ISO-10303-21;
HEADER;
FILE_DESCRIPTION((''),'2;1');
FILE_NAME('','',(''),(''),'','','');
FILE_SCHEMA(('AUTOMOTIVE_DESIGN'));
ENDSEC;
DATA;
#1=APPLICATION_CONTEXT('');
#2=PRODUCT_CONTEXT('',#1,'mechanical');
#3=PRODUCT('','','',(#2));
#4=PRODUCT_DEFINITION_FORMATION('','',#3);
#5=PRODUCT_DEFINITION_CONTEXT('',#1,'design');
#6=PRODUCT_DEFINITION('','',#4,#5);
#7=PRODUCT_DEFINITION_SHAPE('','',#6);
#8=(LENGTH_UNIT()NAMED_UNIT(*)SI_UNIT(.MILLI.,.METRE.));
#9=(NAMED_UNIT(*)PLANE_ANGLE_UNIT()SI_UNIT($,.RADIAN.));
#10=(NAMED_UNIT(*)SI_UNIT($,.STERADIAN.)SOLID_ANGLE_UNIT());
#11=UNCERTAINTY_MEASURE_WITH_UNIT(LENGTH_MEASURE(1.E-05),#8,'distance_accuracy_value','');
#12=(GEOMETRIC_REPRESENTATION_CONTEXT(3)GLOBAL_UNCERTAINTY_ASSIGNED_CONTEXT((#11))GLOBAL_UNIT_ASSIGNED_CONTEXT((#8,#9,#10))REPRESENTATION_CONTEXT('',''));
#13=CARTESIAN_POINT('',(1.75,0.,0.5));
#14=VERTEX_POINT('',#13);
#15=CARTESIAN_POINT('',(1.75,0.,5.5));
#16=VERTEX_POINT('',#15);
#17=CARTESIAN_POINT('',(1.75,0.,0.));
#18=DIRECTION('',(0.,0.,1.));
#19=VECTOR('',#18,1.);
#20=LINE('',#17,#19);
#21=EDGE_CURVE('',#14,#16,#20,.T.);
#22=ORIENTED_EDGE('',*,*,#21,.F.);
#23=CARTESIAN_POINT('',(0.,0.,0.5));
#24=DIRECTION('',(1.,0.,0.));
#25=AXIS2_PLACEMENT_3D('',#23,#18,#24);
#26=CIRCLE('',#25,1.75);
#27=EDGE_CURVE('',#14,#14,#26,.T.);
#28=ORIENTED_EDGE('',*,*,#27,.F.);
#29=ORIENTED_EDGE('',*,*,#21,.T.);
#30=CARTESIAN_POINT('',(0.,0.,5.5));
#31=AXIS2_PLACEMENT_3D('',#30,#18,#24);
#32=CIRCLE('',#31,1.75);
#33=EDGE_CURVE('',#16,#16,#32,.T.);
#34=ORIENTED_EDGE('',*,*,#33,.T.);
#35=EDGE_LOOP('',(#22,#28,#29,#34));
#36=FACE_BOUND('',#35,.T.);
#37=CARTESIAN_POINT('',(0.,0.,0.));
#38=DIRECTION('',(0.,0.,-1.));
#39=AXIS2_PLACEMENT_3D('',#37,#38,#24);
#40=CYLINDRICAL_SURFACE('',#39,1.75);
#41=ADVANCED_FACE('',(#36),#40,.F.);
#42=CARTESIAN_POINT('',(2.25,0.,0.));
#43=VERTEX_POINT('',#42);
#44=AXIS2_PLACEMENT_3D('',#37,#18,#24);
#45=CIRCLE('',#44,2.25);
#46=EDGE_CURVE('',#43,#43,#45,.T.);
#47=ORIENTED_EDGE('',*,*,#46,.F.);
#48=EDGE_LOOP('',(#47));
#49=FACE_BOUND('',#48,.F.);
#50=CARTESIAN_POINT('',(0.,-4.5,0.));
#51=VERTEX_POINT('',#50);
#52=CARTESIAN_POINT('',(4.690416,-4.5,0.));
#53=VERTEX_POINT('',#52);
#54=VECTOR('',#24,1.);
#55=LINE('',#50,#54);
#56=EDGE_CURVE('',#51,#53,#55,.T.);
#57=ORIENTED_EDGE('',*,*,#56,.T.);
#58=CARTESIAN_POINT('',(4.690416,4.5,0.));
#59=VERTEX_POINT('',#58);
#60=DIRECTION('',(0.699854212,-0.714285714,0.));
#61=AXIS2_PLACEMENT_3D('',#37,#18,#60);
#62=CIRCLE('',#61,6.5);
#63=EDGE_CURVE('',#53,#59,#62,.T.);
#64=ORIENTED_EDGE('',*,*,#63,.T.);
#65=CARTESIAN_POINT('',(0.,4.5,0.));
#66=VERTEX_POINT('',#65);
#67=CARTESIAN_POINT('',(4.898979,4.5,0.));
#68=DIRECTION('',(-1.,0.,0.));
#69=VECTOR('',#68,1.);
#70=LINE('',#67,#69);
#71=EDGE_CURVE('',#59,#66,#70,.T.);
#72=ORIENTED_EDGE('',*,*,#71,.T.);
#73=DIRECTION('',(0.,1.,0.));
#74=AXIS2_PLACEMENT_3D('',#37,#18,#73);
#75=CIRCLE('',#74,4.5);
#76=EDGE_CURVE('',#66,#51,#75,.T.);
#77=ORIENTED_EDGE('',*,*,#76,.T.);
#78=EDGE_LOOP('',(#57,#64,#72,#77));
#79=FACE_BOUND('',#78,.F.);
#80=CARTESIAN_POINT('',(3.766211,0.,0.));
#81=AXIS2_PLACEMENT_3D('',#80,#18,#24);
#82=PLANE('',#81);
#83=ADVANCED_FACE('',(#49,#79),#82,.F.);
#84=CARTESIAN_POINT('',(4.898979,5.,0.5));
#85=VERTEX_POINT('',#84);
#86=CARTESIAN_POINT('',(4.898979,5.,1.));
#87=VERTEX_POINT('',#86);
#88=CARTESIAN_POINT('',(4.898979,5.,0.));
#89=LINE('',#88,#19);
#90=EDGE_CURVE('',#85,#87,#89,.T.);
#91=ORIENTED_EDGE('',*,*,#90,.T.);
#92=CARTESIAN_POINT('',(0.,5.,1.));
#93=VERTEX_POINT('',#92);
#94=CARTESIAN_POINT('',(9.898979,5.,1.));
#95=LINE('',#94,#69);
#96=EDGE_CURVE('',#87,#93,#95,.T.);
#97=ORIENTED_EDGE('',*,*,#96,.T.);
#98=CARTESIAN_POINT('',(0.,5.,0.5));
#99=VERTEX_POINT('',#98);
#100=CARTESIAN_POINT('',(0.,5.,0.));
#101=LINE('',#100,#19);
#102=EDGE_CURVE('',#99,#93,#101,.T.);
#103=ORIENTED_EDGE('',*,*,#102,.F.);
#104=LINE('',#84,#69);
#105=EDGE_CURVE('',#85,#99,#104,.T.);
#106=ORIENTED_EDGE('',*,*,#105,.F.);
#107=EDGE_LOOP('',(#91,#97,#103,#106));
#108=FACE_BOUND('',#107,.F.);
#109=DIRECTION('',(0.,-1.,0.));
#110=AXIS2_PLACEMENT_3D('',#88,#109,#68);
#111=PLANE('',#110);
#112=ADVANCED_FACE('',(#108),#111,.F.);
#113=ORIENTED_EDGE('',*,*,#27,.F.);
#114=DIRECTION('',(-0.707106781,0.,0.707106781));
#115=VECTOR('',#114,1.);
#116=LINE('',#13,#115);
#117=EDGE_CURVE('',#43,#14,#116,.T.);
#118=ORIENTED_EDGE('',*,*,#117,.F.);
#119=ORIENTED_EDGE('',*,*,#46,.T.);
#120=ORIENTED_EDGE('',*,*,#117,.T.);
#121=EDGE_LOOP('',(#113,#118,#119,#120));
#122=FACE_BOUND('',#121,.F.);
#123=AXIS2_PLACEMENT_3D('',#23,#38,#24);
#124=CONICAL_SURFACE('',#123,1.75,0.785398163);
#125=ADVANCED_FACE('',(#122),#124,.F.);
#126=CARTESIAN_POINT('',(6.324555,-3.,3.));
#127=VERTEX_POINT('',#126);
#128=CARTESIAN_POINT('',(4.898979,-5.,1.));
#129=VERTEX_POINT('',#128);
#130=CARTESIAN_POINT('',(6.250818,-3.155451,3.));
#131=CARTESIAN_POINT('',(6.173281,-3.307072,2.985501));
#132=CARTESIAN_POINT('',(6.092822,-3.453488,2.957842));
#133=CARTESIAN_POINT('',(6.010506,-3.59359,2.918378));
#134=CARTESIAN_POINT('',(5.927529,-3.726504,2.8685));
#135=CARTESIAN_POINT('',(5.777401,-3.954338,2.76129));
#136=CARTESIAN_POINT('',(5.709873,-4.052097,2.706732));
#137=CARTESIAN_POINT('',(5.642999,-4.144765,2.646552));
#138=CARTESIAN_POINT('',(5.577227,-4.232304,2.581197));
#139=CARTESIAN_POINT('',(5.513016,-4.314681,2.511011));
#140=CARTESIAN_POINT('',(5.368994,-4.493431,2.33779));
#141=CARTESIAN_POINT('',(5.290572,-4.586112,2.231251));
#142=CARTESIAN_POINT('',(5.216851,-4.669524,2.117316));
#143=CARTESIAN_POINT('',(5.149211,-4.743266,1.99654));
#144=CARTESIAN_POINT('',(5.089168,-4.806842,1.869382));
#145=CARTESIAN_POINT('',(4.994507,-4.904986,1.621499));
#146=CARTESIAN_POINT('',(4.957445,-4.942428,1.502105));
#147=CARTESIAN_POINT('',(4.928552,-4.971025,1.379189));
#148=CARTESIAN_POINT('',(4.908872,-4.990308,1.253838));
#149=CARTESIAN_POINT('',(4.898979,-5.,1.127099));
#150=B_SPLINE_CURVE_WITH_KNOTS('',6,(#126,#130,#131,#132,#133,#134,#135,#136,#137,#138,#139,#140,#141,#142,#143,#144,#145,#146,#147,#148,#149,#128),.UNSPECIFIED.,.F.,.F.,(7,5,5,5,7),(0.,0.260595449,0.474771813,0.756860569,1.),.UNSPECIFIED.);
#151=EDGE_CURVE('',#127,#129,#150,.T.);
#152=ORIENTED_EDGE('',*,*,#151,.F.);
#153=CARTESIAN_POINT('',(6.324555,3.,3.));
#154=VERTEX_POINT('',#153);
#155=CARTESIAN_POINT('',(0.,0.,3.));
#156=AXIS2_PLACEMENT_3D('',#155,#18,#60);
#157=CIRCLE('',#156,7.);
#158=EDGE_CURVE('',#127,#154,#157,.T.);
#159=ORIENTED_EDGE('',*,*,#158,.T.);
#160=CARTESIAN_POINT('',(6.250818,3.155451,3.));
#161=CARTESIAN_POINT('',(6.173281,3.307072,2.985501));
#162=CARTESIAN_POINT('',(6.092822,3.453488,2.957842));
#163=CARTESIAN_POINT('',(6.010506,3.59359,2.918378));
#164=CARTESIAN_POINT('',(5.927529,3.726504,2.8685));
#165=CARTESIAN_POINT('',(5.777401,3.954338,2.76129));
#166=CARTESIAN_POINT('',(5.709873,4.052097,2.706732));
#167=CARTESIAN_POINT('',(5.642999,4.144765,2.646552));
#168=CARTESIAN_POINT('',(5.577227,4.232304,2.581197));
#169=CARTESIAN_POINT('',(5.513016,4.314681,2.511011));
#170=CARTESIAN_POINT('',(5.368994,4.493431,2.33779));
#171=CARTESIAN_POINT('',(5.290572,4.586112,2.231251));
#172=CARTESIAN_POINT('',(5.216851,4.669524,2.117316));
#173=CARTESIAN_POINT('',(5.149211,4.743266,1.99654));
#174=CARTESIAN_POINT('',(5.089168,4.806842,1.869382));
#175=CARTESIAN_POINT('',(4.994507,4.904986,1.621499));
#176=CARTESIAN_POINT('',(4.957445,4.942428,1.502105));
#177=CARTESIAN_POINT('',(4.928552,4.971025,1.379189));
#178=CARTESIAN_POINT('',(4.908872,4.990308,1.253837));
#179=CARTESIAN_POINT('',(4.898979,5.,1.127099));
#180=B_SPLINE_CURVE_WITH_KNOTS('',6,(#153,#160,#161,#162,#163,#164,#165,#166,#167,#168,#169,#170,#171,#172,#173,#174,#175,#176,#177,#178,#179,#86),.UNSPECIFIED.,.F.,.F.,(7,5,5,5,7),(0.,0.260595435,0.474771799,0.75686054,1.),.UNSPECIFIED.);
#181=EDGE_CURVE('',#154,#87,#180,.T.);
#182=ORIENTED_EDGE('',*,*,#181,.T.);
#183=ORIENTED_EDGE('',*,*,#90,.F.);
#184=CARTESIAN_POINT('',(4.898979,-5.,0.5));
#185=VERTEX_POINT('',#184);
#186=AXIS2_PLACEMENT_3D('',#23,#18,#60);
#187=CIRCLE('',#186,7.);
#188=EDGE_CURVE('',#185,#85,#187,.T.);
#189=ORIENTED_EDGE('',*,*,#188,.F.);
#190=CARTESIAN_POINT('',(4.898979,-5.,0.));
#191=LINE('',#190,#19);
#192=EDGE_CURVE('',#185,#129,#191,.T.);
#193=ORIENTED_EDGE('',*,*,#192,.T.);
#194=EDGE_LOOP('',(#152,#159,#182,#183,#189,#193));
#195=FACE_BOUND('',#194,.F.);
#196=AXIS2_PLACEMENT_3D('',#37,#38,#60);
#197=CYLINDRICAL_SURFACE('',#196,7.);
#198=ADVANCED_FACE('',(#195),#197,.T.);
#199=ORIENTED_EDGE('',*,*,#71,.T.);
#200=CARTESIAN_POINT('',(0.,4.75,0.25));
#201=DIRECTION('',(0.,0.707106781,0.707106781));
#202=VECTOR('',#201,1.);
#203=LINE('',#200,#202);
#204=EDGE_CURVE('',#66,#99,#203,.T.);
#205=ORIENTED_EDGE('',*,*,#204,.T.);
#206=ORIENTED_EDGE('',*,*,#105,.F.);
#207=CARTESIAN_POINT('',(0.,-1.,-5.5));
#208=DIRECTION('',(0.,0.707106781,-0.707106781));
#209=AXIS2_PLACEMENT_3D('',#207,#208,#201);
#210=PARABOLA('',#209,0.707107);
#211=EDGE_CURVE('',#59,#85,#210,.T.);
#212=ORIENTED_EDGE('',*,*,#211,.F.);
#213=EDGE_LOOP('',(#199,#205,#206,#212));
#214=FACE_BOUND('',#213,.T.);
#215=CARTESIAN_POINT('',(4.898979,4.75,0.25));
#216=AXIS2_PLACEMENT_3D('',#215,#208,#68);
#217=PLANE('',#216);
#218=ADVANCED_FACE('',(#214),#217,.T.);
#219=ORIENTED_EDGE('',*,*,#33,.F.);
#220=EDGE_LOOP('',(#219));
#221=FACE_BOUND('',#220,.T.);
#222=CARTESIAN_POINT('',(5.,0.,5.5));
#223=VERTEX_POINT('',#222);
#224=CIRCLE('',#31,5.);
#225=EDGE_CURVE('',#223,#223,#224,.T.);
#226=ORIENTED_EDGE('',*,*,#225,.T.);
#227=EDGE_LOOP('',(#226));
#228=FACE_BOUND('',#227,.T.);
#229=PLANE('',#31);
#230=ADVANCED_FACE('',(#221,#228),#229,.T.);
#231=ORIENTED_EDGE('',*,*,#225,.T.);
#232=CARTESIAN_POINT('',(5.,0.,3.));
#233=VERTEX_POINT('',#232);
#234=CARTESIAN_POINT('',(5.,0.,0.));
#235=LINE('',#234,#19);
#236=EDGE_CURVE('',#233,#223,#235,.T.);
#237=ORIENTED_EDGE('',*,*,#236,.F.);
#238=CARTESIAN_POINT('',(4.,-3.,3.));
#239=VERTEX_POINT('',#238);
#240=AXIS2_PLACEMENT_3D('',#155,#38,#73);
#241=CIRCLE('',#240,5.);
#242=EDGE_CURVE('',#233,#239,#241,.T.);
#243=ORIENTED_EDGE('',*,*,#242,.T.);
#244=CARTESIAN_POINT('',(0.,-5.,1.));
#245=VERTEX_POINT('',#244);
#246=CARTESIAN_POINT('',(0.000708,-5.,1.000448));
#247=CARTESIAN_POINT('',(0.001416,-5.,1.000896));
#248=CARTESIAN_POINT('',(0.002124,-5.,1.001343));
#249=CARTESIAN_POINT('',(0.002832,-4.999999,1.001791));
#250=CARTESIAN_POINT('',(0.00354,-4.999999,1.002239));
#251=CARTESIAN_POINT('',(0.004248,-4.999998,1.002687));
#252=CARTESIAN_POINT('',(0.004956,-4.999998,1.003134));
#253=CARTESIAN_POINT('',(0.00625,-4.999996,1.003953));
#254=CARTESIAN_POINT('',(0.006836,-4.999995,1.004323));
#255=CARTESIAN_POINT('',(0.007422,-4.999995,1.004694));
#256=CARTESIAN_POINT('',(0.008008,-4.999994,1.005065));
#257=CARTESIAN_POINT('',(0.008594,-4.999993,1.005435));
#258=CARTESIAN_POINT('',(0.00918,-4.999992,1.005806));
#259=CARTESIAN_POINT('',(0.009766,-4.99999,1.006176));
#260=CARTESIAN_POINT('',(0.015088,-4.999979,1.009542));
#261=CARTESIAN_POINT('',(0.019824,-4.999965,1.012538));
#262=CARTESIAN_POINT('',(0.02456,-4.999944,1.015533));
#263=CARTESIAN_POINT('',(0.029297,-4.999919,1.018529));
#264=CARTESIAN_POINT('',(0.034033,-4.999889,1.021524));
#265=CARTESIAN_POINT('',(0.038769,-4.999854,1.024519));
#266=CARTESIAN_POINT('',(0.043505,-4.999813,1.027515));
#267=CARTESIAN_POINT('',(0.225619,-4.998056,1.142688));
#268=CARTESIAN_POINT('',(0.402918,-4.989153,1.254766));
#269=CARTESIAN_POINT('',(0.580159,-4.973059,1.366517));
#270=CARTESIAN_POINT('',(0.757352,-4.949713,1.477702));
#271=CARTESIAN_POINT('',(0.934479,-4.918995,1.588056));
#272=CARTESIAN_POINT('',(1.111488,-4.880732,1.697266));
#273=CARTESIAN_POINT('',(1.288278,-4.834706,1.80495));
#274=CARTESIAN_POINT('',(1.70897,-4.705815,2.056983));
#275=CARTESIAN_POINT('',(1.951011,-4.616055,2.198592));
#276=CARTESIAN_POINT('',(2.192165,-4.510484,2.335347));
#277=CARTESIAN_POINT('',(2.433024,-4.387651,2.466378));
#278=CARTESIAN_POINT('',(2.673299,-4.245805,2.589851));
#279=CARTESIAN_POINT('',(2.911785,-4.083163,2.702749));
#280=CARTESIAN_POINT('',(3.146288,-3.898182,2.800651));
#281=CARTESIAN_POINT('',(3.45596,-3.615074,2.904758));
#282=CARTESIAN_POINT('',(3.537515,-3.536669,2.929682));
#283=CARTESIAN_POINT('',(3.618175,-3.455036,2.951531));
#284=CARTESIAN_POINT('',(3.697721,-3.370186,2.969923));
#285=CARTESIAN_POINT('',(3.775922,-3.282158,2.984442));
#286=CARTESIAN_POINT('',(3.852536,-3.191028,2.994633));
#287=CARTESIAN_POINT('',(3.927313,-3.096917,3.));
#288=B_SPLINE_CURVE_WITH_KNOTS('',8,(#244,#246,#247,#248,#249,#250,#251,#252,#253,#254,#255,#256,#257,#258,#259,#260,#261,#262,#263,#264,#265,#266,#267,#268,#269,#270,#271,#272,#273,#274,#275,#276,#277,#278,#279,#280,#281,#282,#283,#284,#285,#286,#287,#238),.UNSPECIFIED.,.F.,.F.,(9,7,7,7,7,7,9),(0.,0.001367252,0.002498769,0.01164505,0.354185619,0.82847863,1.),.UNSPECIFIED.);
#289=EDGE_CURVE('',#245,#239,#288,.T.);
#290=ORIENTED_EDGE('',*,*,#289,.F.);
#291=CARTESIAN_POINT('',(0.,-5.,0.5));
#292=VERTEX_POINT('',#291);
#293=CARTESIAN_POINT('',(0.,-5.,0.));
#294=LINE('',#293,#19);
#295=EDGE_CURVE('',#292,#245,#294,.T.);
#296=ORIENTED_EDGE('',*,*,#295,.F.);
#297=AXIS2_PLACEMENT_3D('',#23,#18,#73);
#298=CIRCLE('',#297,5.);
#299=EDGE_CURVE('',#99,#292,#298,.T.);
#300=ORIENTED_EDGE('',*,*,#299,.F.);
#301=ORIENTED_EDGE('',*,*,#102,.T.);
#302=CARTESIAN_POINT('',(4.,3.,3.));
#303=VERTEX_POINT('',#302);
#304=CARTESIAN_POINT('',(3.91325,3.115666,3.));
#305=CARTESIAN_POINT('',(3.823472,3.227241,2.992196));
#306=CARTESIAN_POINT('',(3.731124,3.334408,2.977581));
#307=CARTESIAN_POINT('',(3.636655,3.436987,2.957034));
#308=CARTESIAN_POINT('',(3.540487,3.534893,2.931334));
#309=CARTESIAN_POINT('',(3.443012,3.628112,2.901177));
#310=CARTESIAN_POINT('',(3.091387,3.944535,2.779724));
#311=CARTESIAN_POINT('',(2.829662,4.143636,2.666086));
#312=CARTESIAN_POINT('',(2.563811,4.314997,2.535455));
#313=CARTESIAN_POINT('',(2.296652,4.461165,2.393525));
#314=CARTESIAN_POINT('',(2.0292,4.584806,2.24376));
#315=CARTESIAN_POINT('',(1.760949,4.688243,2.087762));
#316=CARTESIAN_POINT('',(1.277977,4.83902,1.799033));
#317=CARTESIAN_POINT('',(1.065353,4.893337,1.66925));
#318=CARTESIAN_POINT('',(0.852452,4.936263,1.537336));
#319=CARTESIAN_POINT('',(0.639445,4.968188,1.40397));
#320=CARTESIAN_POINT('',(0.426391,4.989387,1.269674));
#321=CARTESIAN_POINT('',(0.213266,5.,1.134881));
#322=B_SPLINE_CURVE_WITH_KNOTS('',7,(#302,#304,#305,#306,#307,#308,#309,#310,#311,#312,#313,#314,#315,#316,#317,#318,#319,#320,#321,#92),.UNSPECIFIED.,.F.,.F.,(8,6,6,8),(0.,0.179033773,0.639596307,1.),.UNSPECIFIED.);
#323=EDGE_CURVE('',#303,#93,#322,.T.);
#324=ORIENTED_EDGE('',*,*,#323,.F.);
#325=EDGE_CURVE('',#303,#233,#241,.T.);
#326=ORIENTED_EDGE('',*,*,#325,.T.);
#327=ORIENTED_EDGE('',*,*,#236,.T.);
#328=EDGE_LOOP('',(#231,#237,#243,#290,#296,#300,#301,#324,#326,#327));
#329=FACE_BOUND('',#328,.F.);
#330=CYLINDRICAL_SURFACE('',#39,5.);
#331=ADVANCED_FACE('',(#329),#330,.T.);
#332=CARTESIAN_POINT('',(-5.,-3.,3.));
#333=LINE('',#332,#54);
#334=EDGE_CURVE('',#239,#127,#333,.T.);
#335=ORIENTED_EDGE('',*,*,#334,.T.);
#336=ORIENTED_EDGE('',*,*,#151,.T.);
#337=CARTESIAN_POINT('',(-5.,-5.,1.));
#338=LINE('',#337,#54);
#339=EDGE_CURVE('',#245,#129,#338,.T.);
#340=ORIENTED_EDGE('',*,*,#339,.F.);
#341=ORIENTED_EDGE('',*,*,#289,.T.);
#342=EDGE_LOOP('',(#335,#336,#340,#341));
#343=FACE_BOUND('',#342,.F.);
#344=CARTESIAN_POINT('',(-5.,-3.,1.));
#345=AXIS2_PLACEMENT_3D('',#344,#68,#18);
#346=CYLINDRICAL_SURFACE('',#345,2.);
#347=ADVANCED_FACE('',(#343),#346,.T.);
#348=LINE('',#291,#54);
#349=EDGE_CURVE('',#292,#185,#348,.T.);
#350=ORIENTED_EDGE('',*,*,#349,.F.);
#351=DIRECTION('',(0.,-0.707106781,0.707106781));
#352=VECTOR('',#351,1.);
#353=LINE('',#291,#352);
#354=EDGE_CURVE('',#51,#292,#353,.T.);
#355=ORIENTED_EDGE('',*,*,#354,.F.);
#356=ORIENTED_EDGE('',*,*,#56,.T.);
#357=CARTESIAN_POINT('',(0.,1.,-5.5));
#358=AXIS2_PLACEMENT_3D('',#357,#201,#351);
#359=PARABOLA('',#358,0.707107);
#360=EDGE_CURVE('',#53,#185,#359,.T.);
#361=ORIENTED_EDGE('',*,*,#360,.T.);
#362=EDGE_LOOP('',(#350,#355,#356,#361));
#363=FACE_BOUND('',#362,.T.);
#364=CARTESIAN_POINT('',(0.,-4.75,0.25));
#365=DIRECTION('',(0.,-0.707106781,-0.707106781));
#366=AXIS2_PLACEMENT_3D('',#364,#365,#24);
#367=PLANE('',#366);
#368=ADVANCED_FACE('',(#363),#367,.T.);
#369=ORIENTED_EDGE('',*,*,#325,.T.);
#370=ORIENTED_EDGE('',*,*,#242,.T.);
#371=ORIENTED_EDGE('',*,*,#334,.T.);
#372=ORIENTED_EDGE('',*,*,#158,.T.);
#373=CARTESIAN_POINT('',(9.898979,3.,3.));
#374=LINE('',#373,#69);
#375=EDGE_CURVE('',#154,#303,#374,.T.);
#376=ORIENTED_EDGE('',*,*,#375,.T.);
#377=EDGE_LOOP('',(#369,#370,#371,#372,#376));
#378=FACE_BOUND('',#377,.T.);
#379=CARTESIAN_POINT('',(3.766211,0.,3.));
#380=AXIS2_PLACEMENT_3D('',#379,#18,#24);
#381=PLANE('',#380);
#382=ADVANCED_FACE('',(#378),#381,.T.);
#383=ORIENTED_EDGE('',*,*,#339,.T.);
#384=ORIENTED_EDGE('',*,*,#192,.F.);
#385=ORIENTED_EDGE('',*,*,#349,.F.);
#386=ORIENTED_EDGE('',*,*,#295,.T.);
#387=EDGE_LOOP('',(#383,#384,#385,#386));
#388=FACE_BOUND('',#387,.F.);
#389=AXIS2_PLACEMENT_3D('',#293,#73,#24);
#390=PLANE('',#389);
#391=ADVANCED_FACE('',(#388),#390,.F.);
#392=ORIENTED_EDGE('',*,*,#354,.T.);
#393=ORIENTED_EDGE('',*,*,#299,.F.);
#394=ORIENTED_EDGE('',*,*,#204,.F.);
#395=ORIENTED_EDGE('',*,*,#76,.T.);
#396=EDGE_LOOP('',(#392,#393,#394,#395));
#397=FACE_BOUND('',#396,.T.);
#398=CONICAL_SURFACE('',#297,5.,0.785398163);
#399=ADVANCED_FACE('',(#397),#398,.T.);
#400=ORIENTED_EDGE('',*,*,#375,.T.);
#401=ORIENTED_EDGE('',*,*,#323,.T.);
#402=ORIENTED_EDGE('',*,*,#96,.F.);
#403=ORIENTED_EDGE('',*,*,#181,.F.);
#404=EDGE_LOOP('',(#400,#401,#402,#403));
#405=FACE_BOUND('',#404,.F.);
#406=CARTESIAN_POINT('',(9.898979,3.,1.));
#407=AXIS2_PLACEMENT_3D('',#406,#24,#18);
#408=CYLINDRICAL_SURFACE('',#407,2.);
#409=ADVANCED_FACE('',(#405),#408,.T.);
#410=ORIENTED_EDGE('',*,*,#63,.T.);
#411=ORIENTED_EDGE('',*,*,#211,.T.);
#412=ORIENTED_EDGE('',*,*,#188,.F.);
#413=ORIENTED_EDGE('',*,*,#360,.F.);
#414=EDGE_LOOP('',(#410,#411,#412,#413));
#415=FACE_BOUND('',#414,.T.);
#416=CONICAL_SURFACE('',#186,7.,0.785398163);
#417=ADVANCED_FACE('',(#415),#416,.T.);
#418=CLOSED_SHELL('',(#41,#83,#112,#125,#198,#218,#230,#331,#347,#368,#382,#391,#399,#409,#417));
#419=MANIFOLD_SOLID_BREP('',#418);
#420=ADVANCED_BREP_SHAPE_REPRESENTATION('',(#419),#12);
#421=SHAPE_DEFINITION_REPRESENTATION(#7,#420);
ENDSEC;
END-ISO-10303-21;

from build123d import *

# Parameters (mm, degrees)
F0_R         = 5
F0_R_2       = 1.75
F1_DEPTH     = 5.5
F3_DEPTH     = 3
F4_T4_DEPTH  = 14.8989794856
F4_S5_R      = 5
F4_T6_DEPTH  = 9
F4_T10_DEPTH = 14.8989794856
F4_S11_R     = 5
F4_T12_DEPTH = 9
F5_SIZE      = 0.5


# Not quite as in the source:
# - a fillet or chamfer that OpenCascade refuses, or shapes differently, is made with other operations: its cross-section is extruded or revolved along the edge and cut away or added


with BuildPart() as f1:
    # F0 (on Top) → F1 (new body)
    with BuildSketch(Plane.XY):
        Circle(F0_R)
        Circle(F0_R_2, mode=Mode.SUBTRACT)
    extrude(amount=F1_DEPTH)

    # F2 (on Top) → F3 (join)
    with BuildSketch(Plane.XY):
        with BuildLine():
            Line((0, -5), (4.8989794856, -5))
            ThreePointArc((4.8989794856, -5), (7, 0), (4.8989794856, 5))
            Line((4.8989794856, 5), (0, 5))
            ThreePointArc((0, 5), (5, 0), (0, -5))
        make_face()
    extrude(amount=F3_DEPTH)

    # F4: fillet of radius 2 on 2 edges, made by hand


with BuildPart() as f4_tool2:
    # F4_s3 → F4_t4 (new body)
    with BuildSketch(Plane.YZ.offset(-5)):
        with BuildLine():
            ThreePointArc((-3, 3), (-4.4142135624, 2.4142135624), (-5, 1))
            Line((-5, 1), (-5, 3))
            Line((-5, 3), (-3, 3))
        make_face()
    extrude(amount=F4_T4_DEPTH)

    # F4_s5 → F4_t6 (cut, symmetric)
    with BuildSketch(Plane.XY.offset(2)):
        Circle(F4_S5_R)
    extrude(amount=F4_T6_DEPTH, both=True, mode=Mode.SUBTRACT)


with BuildPart() as f1_1:
    add(f1.part)

    # F4_t1: cut F4_tool2
    add(f4_tool2.part, mode=Mode.SUBTRACT)


with BuildPart() as f4_tool8:
    # F4_s9 → F4_t10 (new body)
    with BuildSketch(Plane.YZ.offset(9.8989794856)):
        with BuildLine():
            ThreePointArc((3, 3), (4.4142135624, 2.4142135624), (5, 1))
            Line((5, 1), (5, 3))
            Line((5, 3), (3, 3))
        make_face()
    extrude(amount=-F4_T10_DEPTH)

    # F4_s11 → F4_t12 (cut, symmetric)
    with BuildSketch(Plane.XY.offset(2)):
        Circle(F4_S11_R)
    extrude(amount=F4_T12_DEPTH, both=True, mode=Mode.SUBTRACT)


with BuildPart() as f1_2:
    add(f1_1.part)

    # F4_t7: cut F4_tool8
    add(f4_tool8.part, mode=Mode.SUBTRACT)

    # F5
    f5_edges = [f1_2.edges().sort_by_distance(p)[0] for p in [
        (-5, 0, 0),
        (2.44949, -5, 0),
        (7, 0, 0),
        (2.44949, 5, 0),
        (-1.75, 0, 0),
    ]]
    chamfer(f5_edges, length=F5_SIZE)


solid = f1_2.part
